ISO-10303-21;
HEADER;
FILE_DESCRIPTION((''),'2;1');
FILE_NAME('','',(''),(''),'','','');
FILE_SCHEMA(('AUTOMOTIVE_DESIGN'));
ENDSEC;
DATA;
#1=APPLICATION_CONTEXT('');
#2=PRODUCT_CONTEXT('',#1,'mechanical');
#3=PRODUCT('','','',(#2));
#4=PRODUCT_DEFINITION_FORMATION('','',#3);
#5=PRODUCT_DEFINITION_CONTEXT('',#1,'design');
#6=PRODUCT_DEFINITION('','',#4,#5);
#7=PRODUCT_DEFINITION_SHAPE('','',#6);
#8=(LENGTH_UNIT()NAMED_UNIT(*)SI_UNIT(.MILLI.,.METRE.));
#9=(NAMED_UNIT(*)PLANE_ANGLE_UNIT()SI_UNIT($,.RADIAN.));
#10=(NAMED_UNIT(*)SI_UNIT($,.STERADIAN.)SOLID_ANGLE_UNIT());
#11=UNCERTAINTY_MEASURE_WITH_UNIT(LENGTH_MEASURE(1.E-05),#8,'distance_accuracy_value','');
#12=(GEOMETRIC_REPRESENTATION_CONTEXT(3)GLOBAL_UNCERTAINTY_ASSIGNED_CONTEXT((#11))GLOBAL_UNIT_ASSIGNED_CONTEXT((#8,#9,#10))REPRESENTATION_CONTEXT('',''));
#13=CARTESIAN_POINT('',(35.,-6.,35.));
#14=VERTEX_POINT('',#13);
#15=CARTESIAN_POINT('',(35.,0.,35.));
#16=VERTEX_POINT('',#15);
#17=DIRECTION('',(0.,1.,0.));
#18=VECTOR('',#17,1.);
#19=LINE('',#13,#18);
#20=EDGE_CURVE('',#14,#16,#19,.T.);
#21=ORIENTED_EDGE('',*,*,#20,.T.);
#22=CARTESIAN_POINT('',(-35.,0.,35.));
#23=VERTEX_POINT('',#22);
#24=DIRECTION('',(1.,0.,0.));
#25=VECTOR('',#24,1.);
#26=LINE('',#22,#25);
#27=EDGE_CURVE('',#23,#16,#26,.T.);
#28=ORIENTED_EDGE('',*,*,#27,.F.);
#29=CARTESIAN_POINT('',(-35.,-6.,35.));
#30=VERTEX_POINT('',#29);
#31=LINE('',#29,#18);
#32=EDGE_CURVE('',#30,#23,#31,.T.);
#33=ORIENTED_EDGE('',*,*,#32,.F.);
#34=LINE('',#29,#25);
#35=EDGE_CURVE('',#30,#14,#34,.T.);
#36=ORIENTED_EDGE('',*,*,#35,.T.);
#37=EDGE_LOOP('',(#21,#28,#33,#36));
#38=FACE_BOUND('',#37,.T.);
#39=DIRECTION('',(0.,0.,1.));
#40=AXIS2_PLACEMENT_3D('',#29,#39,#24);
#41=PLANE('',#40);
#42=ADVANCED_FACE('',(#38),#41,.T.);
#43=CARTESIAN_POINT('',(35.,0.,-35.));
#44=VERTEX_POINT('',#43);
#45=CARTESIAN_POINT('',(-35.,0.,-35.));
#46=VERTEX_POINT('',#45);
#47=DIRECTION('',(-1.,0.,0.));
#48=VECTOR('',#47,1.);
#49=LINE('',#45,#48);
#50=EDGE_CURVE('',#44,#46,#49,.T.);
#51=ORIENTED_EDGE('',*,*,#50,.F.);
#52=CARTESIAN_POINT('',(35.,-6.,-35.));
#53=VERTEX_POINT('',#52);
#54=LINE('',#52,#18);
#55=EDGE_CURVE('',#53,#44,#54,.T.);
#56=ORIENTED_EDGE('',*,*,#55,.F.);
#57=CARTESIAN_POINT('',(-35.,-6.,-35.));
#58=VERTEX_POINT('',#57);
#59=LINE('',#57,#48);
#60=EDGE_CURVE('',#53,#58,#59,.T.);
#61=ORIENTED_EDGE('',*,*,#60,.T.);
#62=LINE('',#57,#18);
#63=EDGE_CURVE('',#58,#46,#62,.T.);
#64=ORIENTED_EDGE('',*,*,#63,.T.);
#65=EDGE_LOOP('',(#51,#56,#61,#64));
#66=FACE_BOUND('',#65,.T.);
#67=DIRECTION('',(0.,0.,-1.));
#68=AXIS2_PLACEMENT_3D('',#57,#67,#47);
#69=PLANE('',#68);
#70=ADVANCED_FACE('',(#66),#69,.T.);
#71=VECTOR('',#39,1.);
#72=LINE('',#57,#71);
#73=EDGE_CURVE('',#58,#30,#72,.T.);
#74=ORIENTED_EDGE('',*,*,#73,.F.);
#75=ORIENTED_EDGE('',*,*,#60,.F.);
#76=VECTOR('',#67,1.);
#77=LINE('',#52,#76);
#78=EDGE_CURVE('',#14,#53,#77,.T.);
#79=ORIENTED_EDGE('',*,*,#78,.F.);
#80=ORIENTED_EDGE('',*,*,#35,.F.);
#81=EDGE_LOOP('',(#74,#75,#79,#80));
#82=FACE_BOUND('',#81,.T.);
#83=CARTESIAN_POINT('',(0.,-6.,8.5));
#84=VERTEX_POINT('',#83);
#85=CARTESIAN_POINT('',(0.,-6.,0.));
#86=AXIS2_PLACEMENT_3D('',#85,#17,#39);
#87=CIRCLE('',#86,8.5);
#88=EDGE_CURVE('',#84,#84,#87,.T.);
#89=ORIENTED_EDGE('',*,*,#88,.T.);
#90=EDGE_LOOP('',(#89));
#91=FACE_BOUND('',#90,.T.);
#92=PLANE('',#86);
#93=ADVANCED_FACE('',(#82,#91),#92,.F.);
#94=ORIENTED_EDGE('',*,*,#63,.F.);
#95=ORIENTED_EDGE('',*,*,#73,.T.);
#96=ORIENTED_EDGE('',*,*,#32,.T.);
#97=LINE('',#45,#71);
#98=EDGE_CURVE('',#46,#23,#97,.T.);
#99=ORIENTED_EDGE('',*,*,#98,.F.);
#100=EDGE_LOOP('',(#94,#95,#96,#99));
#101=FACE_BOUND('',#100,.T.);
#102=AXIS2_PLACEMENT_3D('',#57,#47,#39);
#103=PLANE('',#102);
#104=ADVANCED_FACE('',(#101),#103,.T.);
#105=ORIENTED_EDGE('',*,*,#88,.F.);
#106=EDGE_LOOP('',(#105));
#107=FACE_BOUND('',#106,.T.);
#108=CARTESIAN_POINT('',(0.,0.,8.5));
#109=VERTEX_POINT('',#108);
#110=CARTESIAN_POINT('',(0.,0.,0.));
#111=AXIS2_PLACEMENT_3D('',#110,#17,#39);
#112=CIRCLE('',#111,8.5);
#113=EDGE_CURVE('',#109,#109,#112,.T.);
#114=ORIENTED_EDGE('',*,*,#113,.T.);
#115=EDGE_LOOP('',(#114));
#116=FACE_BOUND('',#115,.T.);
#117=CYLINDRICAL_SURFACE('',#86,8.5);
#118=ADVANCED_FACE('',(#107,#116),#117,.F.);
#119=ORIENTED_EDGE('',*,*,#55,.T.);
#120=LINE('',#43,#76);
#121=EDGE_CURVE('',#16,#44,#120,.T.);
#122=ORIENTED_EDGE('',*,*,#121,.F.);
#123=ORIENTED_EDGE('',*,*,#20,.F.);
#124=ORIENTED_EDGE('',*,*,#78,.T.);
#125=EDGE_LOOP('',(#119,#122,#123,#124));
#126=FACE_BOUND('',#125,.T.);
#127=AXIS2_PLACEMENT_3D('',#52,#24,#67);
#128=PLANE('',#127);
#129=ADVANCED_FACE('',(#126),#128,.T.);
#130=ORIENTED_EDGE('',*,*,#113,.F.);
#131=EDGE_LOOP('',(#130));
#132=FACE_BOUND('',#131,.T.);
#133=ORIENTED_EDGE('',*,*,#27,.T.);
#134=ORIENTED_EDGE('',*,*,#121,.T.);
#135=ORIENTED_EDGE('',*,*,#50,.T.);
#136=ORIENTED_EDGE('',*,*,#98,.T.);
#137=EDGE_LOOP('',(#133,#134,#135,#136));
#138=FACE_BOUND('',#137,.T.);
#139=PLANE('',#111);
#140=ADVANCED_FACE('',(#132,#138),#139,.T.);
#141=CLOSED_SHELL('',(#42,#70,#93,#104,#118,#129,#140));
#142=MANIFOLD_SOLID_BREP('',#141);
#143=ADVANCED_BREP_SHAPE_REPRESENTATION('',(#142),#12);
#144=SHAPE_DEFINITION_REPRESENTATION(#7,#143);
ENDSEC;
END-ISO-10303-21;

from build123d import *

# Parameters (mm, degrees)
SKETCH_1_W             = 70
SKETCH_1_H             = 70
SKETCH_1_R             = 8.5
SM_BASE_FLANGE_1_DEPTH = 6


# Sheet-metal steps are written as plain solids
with BuildPart() as part:
    # Sketch 1 → Базовая кромка1 (new body)
    with BuildSketch(Plane(origin=(0, 0, 0), x_dir=(1, 0, 0), z_dir=(0, 1, 0))):
        Rectangle(SKETCH_1_W, SKETCH_1_H)
        with Locations(Location((0, 0, 0), (0, 0, 270))):
            Circle(SKETCH_1_R, mode=Mode.SUBTRACT)
    extrude(amount=-SM_BASE_FLANGE_1_DEPTH)


solid = part.part
